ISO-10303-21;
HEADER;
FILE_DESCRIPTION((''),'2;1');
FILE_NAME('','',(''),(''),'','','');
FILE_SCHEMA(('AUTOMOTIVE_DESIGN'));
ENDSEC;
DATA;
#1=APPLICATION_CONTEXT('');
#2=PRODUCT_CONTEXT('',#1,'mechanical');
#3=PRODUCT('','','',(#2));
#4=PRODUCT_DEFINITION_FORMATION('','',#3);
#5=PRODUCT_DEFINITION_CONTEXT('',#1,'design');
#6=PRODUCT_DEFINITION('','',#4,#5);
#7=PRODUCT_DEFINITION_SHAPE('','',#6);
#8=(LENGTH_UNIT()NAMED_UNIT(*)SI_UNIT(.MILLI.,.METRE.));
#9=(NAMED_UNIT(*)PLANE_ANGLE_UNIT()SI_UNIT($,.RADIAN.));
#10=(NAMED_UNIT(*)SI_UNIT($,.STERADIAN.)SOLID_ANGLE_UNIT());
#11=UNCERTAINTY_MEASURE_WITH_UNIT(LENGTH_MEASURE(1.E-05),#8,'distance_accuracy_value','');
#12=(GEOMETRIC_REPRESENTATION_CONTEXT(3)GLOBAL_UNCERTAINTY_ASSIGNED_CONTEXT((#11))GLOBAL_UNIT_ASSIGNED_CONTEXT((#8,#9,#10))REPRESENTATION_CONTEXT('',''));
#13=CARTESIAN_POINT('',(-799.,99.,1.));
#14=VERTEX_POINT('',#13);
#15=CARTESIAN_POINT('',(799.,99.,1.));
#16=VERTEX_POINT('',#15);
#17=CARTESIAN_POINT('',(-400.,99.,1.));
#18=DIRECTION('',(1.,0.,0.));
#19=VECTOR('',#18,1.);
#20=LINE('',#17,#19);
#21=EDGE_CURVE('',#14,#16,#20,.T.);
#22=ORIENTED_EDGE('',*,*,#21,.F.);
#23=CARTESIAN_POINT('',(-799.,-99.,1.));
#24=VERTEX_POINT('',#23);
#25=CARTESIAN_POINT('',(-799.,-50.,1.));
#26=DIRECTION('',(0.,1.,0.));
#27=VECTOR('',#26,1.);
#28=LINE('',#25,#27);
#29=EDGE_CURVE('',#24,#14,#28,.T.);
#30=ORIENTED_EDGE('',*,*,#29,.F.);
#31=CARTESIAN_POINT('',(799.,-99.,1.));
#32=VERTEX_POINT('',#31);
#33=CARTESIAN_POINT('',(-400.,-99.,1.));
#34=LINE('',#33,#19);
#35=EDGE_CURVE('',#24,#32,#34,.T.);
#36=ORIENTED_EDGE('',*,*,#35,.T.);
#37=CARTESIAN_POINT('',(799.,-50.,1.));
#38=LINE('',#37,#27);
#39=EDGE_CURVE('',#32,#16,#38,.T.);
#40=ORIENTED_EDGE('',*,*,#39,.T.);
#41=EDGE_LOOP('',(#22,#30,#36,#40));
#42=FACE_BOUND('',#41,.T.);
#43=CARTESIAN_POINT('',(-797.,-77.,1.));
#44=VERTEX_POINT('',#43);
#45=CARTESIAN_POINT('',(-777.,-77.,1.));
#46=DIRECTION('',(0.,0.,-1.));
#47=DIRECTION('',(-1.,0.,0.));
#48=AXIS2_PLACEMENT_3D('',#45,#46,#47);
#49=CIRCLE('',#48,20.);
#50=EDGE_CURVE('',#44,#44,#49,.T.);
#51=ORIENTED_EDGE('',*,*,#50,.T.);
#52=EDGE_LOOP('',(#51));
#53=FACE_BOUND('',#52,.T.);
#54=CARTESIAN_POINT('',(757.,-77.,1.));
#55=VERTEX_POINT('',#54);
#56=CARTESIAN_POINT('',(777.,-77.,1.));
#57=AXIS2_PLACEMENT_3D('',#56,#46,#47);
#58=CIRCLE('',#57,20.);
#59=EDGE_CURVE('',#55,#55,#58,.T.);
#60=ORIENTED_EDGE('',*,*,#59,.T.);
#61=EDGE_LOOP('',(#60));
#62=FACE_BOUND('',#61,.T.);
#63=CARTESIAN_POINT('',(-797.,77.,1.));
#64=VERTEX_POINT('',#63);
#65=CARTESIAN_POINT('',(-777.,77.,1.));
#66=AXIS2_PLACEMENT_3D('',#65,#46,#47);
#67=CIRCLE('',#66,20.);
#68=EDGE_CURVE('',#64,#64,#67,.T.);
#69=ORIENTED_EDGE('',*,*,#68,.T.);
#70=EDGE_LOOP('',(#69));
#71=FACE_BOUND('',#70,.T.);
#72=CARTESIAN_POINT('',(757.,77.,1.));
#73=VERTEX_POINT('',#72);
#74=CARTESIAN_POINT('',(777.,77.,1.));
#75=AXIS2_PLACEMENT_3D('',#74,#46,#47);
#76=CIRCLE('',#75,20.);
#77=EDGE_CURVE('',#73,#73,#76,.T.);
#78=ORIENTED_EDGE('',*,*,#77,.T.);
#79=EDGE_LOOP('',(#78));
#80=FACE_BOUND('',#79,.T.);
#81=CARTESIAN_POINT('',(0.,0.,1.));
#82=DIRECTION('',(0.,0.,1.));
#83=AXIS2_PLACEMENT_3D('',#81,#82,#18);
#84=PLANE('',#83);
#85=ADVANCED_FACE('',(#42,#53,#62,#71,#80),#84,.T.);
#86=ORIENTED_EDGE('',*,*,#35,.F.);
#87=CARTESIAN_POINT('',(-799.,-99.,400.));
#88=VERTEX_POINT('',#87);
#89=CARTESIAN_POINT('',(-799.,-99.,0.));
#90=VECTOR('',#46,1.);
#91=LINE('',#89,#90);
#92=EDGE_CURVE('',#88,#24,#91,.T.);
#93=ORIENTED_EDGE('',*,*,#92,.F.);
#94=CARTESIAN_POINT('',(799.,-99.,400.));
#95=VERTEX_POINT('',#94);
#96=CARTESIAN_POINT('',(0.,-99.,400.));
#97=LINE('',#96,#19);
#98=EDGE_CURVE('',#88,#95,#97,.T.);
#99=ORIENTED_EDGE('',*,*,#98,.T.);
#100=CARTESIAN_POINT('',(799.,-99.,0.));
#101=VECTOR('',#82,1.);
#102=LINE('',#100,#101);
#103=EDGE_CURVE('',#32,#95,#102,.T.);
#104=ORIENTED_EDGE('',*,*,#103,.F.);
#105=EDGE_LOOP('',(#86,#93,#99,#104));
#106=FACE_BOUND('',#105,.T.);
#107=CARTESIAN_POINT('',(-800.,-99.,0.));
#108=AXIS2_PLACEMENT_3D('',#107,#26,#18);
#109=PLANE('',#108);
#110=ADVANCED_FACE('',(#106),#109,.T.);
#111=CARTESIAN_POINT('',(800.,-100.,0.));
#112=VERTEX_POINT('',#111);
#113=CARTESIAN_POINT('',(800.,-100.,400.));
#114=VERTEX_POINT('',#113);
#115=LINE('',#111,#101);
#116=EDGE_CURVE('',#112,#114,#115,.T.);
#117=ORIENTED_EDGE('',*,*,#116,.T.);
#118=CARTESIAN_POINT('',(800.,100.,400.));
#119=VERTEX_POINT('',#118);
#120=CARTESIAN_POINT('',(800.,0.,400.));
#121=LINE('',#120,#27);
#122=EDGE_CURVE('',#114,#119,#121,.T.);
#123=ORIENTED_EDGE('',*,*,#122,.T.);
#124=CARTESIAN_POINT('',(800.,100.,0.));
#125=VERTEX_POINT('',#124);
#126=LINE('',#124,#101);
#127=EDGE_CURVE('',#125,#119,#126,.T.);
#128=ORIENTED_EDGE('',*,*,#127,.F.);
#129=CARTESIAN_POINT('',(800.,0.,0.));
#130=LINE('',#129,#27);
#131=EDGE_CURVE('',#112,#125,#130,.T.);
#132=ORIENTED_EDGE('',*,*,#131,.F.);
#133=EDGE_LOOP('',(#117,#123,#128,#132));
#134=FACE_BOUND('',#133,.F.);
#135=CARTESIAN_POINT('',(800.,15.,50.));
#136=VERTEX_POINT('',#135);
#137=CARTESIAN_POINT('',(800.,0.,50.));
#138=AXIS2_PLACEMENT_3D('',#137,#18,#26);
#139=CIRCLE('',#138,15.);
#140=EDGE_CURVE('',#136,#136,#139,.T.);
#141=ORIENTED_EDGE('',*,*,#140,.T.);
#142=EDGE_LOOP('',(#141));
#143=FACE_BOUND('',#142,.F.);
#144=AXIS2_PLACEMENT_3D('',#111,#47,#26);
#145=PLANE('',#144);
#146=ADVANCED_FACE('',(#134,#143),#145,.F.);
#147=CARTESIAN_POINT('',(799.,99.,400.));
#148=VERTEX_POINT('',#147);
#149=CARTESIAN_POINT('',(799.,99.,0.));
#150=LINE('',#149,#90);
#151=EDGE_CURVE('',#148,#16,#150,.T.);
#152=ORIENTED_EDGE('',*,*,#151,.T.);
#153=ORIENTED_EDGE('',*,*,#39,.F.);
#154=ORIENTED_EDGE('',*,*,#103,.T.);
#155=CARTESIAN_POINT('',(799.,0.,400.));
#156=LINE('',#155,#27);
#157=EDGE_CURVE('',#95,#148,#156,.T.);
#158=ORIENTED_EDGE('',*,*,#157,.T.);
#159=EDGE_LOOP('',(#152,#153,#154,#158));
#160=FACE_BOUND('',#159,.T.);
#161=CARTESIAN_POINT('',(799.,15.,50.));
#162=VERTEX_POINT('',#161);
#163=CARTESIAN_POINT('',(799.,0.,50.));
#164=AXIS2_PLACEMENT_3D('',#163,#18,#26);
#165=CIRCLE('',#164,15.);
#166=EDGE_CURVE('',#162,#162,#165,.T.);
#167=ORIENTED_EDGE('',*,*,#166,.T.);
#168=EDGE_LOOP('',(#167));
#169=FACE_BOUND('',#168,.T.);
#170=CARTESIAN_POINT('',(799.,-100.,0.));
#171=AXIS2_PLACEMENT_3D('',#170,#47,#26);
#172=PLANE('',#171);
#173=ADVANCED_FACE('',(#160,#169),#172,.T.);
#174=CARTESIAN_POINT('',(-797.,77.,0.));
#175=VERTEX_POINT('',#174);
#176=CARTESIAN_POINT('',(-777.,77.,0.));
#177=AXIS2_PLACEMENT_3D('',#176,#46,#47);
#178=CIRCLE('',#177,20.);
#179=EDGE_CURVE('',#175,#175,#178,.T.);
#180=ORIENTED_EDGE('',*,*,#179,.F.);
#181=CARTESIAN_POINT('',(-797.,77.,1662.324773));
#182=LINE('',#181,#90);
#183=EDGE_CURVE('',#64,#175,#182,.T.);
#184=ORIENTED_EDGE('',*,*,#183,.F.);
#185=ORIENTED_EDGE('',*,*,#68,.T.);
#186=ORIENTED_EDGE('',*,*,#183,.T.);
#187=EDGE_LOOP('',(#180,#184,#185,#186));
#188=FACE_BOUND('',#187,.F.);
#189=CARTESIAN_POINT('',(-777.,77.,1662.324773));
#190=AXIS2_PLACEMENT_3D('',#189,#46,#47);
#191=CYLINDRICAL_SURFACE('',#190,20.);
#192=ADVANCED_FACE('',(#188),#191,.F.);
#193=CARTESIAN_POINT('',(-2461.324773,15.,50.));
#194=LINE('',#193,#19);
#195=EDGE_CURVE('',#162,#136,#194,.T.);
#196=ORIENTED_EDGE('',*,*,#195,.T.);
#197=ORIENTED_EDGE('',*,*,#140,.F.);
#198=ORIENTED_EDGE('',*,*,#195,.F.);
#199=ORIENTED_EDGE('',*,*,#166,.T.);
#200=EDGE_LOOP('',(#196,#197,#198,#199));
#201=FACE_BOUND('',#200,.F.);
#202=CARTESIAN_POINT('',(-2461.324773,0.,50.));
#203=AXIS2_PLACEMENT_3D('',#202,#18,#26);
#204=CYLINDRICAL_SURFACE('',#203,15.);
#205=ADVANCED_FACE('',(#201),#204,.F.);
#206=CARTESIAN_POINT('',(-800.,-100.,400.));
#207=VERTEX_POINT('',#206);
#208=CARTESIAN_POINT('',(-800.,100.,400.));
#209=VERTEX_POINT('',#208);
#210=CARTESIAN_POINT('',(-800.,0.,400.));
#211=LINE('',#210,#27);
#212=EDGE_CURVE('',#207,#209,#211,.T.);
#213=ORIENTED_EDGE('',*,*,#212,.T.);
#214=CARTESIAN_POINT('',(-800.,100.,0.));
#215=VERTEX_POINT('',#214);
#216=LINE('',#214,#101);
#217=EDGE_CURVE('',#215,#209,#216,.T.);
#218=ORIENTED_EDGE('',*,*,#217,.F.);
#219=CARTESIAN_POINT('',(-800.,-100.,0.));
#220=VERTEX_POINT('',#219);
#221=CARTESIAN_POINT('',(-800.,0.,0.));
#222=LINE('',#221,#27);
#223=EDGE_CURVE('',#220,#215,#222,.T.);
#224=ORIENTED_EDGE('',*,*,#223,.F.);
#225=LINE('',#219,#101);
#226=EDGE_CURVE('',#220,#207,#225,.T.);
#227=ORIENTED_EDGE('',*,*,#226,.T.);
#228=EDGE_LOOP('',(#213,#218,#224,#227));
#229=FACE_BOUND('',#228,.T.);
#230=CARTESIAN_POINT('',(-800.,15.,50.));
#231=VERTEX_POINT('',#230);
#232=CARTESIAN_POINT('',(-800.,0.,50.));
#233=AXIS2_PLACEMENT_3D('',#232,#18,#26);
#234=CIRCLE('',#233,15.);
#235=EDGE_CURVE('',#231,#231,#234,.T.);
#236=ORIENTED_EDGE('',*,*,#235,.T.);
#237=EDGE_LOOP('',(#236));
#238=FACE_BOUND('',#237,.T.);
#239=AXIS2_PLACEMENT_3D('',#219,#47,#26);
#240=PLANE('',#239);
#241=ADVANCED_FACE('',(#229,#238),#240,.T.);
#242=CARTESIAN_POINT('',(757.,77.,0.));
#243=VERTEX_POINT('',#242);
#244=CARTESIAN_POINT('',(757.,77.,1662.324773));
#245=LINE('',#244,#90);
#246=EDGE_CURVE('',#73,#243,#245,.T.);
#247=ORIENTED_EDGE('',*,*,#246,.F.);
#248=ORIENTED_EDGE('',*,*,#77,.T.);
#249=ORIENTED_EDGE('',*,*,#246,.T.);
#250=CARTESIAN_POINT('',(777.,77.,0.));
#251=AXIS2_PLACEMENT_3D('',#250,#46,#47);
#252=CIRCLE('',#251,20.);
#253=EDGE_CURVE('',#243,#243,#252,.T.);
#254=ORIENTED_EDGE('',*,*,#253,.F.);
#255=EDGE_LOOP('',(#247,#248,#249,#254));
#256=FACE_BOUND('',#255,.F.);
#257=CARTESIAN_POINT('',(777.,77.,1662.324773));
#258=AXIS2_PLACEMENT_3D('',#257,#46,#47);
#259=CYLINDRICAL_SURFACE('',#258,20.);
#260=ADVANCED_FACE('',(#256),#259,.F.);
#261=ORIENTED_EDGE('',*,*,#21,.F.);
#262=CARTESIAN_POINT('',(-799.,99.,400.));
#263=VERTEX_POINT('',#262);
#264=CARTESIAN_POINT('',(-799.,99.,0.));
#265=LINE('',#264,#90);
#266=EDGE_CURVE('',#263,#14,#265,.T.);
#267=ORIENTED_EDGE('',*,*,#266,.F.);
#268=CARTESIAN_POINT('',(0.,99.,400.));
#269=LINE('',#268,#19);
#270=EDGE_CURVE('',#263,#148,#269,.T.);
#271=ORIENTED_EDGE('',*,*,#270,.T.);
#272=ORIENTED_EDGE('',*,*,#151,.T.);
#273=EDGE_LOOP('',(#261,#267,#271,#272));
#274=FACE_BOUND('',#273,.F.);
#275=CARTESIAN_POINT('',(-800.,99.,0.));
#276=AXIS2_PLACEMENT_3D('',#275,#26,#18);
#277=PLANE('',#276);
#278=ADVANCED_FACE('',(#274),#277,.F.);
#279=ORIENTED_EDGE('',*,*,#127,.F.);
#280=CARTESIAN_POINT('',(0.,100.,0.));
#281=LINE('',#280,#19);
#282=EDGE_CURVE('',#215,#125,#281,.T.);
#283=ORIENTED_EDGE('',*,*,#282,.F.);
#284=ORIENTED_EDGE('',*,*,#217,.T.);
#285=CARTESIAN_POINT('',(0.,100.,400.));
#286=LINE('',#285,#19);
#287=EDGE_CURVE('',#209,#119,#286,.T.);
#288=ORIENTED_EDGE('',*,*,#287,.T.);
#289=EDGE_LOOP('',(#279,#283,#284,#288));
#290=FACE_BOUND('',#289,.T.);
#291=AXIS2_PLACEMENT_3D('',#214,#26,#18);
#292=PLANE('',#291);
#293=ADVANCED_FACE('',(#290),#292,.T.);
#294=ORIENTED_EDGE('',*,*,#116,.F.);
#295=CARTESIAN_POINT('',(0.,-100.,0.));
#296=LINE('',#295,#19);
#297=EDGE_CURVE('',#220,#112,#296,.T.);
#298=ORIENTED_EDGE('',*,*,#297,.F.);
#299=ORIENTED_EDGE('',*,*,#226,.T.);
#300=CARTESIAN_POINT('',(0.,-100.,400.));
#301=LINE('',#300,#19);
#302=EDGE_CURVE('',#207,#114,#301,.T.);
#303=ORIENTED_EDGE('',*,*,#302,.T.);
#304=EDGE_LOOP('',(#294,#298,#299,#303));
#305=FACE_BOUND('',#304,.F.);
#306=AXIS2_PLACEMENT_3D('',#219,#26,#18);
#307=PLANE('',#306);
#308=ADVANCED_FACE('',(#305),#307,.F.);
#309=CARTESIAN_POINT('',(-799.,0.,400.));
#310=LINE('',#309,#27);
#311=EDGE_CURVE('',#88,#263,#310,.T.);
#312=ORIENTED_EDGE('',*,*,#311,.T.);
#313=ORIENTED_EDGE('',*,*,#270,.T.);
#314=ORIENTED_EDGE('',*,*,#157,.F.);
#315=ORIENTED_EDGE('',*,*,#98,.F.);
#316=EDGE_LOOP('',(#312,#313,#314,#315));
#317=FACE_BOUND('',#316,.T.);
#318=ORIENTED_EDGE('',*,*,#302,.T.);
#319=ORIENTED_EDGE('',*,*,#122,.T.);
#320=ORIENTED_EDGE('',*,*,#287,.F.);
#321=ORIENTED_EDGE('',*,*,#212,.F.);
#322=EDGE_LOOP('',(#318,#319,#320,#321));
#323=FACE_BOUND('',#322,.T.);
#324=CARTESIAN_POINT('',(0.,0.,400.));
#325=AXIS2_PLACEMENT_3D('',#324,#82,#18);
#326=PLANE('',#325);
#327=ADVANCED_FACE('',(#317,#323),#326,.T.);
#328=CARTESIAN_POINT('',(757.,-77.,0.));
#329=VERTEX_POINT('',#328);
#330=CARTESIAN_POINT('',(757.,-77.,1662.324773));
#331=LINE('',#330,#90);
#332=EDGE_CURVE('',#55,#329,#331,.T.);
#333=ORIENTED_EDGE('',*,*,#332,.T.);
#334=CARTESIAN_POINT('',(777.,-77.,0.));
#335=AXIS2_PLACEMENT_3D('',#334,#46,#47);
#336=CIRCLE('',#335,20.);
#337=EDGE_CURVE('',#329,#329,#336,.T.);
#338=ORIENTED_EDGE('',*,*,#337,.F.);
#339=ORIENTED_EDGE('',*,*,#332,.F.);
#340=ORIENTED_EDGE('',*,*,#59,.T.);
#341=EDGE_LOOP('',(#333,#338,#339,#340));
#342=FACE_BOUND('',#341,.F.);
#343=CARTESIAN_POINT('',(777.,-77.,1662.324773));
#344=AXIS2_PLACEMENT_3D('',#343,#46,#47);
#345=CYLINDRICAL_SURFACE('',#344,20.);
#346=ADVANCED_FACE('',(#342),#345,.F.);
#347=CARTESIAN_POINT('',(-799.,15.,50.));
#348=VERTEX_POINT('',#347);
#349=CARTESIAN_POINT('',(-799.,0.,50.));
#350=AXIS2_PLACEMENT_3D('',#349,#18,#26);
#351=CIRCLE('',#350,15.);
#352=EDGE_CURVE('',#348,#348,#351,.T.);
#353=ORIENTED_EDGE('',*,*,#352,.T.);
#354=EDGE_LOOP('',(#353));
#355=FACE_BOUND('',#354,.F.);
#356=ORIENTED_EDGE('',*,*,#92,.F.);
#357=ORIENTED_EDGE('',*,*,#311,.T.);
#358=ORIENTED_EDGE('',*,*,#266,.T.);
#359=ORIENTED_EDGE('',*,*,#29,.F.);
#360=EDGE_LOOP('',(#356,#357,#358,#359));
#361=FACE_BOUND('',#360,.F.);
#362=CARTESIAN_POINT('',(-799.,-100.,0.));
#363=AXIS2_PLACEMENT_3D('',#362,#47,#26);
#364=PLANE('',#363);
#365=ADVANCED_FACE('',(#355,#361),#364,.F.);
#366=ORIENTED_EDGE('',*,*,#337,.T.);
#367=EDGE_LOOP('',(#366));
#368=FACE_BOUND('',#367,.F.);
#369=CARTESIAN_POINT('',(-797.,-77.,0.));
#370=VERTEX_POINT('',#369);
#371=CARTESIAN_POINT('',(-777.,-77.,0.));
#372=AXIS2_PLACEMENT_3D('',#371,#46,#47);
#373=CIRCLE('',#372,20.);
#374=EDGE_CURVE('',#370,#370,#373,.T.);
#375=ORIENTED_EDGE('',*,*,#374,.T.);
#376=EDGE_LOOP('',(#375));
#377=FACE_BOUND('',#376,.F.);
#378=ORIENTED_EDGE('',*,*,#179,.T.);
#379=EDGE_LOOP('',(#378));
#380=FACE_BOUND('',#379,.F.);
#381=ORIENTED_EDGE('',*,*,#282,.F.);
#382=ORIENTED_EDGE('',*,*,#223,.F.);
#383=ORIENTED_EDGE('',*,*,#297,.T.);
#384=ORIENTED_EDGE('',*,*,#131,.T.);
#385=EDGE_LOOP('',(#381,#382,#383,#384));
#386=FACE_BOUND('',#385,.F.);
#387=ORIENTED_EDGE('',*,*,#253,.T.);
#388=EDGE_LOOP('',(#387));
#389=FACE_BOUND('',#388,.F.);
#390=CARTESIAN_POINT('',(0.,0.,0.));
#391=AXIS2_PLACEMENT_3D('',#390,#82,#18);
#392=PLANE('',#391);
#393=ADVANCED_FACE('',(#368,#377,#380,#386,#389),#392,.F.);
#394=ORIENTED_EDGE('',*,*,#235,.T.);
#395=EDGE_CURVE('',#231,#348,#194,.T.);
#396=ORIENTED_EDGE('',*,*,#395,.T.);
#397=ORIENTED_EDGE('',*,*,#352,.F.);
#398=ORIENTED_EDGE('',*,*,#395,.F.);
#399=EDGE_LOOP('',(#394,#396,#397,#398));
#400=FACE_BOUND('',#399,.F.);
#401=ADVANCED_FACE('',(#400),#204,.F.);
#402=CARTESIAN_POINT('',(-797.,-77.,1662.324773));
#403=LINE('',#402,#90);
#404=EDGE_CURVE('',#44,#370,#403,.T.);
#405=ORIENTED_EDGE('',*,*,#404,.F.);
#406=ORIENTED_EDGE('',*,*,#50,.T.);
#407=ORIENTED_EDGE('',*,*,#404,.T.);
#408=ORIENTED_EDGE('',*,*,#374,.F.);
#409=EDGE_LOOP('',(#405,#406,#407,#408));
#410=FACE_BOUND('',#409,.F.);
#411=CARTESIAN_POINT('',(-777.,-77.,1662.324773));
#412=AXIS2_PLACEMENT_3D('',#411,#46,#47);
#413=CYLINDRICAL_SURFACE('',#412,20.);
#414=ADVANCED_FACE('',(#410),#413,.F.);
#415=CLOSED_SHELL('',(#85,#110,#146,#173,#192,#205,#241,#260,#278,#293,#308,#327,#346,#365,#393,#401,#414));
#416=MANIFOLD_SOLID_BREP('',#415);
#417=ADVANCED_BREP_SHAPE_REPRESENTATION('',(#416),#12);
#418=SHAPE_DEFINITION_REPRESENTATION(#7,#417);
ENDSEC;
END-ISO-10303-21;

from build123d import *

# Parameters (mm, degrees)
F0_W     = 1600
F0_H     = 200
F1_DEPTH = 400
F2_T     = -1
F5_D     = 40
F8_D     = 30


# Not quite as in the source:
# - the program builds the solid bodies; features that only make, move or delete a surface that nothing else refers to are left out


with BuildPart() as f1:
    # F0 (on Top) → F1 (new body)
    with BuildSketch(Plane.XY):
        Rectangle(F0_W, F0_H)
    extrude(amount=F1_DEPTH)

    # F2
    f2_openings = [f1.faces().sort_by_distance(p)[0] for p in [
        (0, 0, 400),
    ]]
    offset(amount=F2_T, openings=f2_openings)

    # F5 (through all)
    with Locations(Plane.XY.offset(1)):
        with Locations((777, 77), (777, -77), (-777, 77), (-777, -77)):
            Hole(F5_D / 2)

    # F8 (through all)
    with Locations(Plane(origin=(-800, 0, 0), x_dir=(0, -1, 0), z_dir=(-1, 0, 0))):
        with Locations((0, 50)):
            Hole(F8_D / 2)


solid = f1.part
